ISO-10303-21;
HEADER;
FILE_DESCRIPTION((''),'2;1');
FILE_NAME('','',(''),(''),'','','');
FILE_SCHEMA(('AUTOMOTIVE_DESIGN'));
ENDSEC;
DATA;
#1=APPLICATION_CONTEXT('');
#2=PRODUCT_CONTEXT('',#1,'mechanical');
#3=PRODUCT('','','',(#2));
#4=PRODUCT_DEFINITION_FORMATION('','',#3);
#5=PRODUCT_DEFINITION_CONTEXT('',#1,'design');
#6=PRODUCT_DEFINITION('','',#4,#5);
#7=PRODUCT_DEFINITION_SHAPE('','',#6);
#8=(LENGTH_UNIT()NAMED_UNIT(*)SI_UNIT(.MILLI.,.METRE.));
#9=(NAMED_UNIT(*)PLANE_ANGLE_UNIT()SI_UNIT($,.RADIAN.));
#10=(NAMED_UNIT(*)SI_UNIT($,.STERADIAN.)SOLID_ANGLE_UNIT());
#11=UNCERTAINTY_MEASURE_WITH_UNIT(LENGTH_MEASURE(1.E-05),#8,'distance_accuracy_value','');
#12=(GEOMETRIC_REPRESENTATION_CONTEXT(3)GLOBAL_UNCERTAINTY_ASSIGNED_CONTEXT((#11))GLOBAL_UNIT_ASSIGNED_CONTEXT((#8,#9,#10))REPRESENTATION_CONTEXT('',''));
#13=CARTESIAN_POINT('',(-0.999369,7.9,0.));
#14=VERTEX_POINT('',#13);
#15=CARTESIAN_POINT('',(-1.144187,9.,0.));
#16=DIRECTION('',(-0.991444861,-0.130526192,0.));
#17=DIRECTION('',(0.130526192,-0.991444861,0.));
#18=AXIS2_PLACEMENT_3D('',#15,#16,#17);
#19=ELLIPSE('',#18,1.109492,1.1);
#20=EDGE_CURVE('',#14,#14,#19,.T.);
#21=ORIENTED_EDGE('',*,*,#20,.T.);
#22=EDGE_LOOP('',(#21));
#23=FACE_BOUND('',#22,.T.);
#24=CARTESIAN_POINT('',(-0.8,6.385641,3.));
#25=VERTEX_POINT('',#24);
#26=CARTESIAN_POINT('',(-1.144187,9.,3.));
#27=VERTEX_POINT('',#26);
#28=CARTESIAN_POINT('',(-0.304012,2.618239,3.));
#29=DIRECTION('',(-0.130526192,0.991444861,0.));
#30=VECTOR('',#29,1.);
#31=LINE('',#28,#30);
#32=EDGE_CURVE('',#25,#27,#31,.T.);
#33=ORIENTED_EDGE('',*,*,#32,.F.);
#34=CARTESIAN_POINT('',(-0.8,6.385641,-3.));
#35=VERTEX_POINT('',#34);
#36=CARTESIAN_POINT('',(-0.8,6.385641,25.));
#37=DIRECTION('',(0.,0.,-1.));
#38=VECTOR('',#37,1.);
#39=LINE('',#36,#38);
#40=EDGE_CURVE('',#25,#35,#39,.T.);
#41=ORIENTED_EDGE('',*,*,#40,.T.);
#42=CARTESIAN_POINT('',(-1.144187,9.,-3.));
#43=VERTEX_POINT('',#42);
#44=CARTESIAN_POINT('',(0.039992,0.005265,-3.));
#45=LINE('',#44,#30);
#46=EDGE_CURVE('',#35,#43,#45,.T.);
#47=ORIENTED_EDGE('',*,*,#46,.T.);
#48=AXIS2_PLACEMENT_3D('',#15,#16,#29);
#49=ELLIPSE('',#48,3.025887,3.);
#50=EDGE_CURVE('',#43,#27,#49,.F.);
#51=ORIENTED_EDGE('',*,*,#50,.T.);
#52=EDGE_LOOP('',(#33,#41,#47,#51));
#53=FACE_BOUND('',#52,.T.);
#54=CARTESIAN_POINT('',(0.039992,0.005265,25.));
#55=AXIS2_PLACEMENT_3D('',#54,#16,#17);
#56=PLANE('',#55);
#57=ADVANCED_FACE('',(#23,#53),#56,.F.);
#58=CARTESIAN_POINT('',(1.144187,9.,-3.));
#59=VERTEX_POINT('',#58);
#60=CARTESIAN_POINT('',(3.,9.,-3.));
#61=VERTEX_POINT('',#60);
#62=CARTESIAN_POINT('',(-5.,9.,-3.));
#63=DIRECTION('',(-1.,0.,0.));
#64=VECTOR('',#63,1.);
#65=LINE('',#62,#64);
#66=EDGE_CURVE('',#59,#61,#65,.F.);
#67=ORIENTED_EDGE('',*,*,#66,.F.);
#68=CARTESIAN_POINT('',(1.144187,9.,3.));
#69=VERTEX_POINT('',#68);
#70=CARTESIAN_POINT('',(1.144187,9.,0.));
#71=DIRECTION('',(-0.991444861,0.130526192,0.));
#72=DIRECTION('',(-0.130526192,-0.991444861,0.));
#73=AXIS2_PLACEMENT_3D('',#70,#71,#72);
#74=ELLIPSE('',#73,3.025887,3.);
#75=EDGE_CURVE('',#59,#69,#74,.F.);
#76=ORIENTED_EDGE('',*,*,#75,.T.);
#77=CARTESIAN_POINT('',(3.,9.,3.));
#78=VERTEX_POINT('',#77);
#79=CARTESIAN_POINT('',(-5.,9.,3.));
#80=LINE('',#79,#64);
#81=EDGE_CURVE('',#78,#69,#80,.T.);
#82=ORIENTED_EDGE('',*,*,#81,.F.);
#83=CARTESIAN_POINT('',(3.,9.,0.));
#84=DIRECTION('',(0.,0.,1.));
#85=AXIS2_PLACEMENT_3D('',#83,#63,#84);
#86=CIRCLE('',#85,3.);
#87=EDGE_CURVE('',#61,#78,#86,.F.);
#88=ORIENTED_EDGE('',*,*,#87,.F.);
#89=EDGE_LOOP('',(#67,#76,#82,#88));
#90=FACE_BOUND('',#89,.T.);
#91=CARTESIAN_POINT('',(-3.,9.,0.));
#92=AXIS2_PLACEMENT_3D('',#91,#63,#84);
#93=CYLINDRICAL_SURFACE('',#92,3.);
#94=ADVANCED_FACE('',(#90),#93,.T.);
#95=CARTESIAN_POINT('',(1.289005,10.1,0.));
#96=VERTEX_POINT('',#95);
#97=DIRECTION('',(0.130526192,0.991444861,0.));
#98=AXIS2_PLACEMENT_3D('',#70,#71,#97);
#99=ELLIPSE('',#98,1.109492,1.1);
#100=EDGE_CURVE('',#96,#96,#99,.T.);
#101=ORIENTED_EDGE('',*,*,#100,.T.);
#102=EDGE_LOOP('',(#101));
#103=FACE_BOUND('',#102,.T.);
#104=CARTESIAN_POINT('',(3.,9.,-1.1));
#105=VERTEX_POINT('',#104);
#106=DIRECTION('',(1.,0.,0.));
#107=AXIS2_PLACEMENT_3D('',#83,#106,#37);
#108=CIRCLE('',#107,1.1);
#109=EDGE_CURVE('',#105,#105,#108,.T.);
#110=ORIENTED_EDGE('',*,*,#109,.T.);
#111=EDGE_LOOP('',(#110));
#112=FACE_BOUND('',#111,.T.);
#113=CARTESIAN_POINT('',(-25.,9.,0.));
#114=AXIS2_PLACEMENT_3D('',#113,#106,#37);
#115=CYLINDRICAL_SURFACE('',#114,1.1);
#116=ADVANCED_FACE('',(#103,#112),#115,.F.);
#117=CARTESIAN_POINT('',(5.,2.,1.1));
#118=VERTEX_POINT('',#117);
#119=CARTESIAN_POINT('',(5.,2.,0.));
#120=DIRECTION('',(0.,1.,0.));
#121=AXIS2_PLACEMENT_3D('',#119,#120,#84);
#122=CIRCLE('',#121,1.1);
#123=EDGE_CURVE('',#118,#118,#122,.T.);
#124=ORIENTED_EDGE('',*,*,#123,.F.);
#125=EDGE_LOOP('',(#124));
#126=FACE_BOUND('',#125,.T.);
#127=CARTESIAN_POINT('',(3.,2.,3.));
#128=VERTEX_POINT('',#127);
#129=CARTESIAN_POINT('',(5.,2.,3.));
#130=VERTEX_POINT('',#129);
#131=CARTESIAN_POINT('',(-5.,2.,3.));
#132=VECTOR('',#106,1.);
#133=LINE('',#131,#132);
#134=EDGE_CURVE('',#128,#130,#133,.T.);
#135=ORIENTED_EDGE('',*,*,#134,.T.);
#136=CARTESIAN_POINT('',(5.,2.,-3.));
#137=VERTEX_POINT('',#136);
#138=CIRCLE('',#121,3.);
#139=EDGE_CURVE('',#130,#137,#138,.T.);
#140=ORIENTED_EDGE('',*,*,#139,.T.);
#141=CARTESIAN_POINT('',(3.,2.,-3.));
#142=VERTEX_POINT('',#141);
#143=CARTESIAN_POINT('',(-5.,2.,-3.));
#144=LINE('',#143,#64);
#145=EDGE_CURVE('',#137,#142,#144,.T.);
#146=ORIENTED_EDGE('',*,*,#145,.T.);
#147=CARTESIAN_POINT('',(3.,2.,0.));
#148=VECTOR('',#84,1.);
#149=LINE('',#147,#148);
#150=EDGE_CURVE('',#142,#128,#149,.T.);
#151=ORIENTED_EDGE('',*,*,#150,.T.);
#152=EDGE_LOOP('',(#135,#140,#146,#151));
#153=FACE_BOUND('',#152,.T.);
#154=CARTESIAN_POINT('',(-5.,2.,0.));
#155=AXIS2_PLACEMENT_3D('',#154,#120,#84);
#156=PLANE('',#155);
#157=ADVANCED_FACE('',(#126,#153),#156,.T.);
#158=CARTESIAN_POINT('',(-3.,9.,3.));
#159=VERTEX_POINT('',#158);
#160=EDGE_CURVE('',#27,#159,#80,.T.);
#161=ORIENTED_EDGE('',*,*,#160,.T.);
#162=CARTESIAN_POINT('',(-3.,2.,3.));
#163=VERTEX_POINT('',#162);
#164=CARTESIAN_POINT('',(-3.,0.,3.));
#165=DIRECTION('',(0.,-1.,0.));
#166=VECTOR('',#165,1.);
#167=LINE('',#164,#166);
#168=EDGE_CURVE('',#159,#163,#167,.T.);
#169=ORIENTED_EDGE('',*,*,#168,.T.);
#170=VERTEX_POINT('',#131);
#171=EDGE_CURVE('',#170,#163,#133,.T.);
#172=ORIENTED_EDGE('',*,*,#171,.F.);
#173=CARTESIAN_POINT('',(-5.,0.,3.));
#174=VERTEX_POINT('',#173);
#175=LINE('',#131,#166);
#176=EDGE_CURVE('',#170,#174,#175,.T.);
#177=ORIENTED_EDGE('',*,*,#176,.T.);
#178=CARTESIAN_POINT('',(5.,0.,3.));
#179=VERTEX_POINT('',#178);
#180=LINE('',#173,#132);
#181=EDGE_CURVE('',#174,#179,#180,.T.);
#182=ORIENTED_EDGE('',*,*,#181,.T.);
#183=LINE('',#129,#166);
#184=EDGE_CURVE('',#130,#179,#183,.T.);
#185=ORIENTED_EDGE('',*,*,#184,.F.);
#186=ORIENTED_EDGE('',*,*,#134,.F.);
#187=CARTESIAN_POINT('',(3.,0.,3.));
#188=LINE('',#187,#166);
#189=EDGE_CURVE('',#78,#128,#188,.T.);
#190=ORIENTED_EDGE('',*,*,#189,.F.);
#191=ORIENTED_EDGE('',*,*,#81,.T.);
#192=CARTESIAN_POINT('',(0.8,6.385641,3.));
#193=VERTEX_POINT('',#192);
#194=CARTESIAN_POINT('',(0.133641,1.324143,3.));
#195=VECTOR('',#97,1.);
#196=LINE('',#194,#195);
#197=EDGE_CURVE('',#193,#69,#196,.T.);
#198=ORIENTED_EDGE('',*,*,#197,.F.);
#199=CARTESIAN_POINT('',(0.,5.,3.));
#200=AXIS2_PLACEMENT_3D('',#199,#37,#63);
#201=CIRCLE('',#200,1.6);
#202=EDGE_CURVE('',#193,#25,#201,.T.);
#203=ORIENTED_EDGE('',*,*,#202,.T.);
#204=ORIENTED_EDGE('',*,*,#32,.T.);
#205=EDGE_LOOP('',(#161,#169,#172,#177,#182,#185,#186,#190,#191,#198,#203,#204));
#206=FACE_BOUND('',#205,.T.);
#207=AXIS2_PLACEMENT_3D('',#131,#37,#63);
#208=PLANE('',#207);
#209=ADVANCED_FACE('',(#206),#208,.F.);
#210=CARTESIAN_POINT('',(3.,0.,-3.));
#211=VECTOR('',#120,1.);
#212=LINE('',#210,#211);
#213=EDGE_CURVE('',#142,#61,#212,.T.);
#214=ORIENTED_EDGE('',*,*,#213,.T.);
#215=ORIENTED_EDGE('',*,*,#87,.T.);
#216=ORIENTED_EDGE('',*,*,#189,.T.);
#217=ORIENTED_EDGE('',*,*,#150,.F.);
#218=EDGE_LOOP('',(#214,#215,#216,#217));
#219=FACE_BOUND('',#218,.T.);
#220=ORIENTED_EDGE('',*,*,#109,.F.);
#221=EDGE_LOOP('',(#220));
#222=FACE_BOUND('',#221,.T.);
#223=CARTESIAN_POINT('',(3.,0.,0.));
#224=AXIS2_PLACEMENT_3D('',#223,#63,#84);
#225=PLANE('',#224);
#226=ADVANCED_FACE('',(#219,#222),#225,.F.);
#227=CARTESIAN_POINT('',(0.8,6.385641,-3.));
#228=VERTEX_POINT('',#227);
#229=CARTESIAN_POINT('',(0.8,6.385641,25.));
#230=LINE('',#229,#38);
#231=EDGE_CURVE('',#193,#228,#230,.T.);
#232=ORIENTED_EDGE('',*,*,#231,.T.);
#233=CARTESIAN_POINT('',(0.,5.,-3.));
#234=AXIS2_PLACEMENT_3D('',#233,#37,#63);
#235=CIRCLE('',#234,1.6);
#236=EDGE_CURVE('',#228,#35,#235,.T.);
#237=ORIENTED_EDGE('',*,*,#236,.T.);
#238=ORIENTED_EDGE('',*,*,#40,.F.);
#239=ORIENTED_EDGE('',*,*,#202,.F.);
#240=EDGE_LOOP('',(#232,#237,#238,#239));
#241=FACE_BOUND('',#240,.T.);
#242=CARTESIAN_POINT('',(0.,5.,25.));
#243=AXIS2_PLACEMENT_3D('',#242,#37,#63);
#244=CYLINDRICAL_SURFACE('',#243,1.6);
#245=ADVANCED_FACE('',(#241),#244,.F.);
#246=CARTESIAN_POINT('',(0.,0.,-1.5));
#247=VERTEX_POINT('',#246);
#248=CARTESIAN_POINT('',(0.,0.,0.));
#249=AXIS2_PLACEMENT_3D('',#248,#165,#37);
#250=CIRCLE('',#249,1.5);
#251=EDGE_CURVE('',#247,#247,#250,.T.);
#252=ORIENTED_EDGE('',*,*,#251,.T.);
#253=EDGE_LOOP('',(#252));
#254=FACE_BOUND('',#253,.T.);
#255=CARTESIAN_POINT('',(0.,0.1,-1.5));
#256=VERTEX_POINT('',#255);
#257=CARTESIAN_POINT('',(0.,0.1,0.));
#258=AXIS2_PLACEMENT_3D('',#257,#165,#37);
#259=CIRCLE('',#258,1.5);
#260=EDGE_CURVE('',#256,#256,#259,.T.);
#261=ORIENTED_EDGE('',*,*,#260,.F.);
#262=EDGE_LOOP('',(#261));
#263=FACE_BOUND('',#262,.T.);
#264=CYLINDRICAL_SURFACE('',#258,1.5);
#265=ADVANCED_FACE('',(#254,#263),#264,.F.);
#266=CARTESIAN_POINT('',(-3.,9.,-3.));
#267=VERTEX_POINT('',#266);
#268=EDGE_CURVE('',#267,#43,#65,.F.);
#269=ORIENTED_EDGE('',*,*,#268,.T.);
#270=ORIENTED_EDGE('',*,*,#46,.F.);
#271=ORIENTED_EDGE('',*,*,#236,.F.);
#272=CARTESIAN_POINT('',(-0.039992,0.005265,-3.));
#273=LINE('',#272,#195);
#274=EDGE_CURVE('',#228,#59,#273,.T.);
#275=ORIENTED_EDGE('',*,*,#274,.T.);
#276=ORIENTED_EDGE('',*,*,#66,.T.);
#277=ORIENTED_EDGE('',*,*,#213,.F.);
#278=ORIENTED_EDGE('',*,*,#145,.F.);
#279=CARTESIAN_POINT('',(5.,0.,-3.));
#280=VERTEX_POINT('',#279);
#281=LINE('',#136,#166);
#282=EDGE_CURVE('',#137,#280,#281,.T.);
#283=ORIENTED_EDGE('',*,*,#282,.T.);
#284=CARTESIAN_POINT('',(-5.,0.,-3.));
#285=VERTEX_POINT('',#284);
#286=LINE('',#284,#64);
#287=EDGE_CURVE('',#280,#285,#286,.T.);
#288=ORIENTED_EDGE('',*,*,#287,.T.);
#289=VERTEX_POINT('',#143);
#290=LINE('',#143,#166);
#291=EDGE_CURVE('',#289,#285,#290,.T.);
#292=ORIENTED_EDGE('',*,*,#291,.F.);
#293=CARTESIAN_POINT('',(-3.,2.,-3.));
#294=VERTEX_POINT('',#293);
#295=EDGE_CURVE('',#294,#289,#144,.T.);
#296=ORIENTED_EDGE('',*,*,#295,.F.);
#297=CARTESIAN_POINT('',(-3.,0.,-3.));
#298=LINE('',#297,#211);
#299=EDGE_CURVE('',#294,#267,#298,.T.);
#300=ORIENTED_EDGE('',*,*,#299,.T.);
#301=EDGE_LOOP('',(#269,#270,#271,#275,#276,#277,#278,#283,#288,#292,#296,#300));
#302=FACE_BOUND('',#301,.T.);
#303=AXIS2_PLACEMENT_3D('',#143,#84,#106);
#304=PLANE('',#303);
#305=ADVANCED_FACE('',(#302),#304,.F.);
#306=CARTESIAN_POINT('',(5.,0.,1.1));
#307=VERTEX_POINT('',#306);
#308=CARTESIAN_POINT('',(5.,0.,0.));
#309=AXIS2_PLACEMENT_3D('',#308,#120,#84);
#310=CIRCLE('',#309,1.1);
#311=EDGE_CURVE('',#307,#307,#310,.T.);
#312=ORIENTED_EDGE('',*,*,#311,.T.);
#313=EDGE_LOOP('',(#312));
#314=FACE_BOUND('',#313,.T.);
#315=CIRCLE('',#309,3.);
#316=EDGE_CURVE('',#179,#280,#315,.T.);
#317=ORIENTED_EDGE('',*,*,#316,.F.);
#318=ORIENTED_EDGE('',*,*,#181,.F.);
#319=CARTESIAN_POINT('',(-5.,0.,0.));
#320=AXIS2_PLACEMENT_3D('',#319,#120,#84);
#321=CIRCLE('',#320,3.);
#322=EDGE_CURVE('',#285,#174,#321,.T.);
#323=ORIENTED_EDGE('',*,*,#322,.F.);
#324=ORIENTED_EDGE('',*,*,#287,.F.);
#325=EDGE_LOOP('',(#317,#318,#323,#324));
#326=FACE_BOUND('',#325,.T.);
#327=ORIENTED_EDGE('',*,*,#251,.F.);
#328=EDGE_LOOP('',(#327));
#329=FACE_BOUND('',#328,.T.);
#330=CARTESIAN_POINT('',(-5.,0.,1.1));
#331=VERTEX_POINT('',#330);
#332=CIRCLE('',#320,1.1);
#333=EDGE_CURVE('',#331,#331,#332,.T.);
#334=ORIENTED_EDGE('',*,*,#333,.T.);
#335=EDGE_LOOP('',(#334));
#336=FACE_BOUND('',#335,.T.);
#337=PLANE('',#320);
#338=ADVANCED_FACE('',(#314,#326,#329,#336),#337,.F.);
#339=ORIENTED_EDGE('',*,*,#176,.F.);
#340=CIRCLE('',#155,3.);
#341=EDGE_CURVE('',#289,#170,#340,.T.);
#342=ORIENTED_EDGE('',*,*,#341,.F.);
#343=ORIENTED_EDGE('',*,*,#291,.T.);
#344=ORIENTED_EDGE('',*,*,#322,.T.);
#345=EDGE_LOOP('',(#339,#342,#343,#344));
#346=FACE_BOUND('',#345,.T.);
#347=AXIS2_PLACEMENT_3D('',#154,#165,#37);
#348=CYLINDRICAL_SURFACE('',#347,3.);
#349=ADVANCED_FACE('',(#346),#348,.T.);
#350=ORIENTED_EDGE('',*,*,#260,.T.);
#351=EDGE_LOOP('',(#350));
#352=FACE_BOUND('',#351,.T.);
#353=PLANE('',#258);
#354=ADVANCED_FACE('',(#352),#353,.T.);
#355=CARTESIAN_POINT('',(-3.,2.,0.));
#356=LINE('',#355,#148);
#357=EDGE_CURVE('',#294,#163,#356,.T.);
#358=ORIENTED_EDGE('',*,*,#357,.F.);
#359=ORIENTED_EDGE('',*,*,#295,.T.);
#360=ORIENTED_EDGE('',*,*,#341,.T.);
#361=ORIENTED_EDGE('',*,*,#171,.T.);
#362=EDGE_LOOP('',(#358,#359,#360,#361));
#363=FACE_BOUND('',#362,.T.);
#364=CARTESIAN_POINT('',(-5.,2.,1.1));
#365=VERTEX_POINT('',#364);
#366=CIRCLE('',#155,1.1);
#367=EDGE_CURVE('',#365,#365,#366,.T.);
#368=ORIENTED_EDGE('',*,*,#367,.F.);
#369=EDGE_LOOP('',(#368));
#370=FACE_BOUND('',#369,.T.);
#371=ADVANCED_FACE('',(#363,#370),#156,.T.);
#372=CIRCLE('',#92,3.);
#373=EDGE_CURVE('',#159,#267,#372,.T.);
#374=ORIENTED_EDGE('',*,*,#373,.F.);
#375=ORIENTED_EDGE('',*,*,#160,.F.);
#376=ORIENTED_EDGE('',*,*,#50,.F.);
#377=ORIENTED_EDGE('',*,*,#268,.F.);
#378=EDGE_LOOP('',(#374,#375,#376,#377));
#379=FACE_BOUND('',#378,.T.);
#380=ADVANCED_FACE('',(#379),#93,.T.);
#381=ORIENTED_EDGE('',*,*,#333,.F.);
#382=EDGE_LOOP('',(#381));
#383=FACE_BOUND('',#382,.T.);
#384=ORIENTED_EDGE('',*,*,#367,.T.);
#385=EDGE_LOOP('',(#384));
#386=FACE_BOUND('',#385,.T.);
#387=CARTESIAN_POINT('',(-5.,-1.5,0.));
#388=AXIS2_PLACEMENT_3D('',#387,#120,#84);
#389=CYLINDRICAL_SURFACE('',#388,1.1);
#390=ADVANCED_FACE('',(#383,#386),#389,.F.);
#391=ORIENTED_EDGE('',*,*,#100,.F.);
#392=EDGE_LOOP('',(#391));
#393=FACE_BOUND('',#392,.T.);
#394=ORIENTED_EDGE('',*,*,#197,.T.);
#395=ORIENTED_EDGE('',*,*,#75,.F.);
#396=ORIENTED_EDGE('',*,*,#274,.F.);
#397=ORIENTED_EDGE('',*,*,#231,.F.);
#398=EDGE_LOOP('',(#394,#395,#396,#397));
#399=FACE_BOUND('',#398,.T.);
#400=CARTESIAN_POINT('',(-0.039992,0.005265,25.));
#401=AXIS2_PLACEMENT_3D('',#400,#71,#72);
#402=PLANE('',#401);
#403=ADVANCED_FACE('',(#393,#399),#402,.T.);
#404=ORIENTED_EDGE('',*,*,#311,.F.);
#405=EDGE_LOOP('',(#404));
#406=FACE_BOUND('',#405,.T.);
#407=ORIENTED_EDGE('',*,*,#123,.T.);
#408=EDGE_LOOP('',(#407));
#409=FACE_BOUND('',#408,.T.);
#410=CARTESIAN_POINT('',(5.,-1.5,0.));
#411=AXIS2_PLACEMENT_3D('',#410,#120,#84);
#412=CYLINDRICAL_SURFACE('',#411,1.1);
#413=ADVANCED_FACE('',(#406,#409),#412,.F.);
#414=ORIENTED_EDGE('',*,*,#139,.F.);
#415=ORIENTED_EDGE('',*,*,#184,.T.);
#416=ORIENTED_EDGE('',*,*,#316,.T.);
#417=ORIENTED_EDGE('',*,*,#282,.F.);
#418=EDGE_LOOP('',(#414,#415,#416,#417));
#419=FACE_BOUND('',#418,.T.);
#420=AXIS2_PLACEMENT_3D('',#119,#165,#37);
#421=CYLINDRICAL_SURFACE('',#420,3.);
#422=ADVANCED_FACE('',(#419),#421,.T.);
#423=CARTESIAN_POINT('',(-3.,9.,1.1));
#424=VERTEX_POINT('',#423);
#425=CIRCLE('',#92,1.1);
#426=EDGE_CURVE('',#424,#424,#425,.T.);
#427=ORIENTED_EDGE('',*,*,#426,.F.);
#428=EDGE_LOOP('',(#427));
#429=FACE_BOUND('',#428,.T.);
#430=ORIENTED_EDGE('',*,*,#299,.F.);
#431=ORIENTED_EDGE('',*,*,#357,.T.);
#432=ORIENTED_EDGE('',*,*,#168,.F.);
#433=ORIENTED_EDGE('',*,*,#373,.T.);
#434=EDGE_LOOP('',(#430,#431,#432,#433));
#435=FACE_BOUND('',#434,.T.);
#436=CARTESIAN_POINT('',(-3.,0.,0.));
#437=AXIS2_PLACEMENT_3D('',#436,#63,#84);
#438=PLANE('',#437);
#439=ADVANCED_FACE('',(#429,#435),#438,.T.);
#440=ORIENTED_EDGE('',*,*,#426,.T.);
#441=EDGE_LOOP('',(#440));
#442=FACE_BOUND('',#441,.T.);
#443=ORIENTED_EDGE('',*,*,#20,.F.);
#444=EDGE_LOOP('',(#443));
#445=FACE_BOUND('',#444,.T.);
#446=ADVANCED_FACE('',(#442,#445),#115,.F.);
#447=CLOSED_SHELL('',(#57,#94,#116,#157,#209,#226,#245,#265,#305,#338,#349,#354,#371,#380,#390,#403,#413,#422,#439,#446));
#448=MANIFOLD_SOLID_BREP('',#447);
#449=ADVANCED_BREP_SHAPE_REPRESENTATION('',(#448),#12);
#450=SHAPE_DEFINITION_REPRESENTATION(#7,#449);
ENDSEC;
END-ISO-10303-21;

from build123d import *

# Parameters (mm, degrees)
EXTRUDE_1_DEPTH     = 2
SKETCH_2_W          = 6
SKETCH_2_H          = 12
EXTRUDE_2_DEPTH     = 3
FILLET_1_RADIUS     = 3
FILLET_1_LENGTH     = 6
CUT_EXTRUDE_START   = -6
CUT_EXTRUDE_1_DEPTH = 6
SKETCH_4_R          = 1.1
CUT_EXTRUDE_2_DEPTH = 28
SKETCH_7_R          = 1.1
CUT_EXTRUDE_5_DEPTH = 3.5
SKETCH_9_R          = 1.5
CUT_EXTRUDE_7_DEPTH = 0.1


# Read off the part's stored shape, not the designer's step: 切除-拉伸1
with BuildPart() as part:
    # 草图1 → 凸台-拉伸1 (new body)
    with BuildSketch(Plane(origin=(0, 0, 0), x_dir=(1, 0, 0), z_dir=(0, 1, 0))):
        with BuildLine():
            Line((-5, 3), (5, 3))
            ThreePointArc((5, 3), (8, 0), (5, -3))
            Line((5, -3), (-5, -3))
            ThreePointArc((-5, -3), (-8, 0), (-5, 3))
        make_face()
    extrude(amount=EXTRUDE_1_DEPTH)

    # 草图2 → 凸台-拉伸2 (add, symmetric)
    with BuildSketch(Plane(origin=(0, 0, 0), x_dir=(0, 0, -1), z_dir=(1, 0, 0))):
        with Locations((0, 6)):
            Rectangle(SKETCH_2_W, SKETCH_2_H)
    extrude(amount=EXTRUDE_2_DEPTH, both=True)

    # 圆角1: full round fillet: the end face becomes a half cylinder, R = half its width
    fillet_1_face = Plane((0, 12, 0), x_dir=(1, 0, 0), z_dir=(0, 1, 0))  # on the end face: x along it, z out of the body
    fillet_1_slab = fillet_1_face.offset(-FILLET_1_RADIUS / 2) * Box(FILLET_1_LENGTH, 2 * FILLET_1_RADIUS, FILLET_1_RADIUS, mode=Mode.PRIVATE)  # the body's end, R deep
    fillet_1_round = Plane((0, 9, 0), x_dir=(0, 1, 0), z_dir=(1, 0, 0)) * Cylinder(FILLET_1_RADIUS, FILLET_1_LENGTH, mode=Mode.PRIVATE)  # its axis R under the face
    add(fillet_1_slab - fillet_1_round, mode=Mode.SUBTRACT)

    # 切除-拉伸1 outline → 切除-拉伸1 (cut)
    with BuildSketch(Plane(origin=(0, 0, -3), x_dir=(-1, 0, 0), z_dir=(0, 0, -1)).offset(CUT_EXTRUDE_START)):
        with BuildLine():
            ThreePointArc((-0.8, 6.385640646), (0, 3.4), (0.8, 6.385640646))
            Line((0.8, 6.385640646), (1.7488232, 13.59266837))
            Line((1.7488232, 13.59266837), (-1.7488232, 13.59266837))
            Line((-1.7488232, 13.59266837), (-0.8, 6.385640646))
        make_face()
    extrude(amount=CUT_EXTRUDE_1_DEPTH, mode=Mode.SUBTRACT)

    # 草图4 → 切除-拉伸2 (cut)
    with BuildSketch(Plane(origin=(3, 0, 0), x_dir=(0, 0, -1), z_dir=(1, 0, 0))):
        with Locations(Location((0, 9, 0), (0, 0, 270))):
            Circle(SKETCH_4_R)
    extrude(amount=-CUT_EXTRUDE_2_DEPTH, mode=Mode.SUBTRACT)

    # 草图7 → 切除-拉伸5 (cut)
    with BuildSketch(Plane(origin=(0, 2, 0), x_dir=(1, 0, 0), z_dir=(0, 1, 0))):
        with Locations(Location((5, 0, 0), (0, 0, 270))):
            Circle(SKETCH_7_R)
        with Locations(Location((-5, 0, 0), (0, 0, 270))):
            Circle(SKETCH_7_R)
    extrude(amount=-CUT_EXTRUDE_5_DEPTH, mode=Mode.SUBTRACT)

    # 草图9 → 切除-拉伸7 (cut)
    with BuildSketch(Plane.XZ):
        with Locations(Location((0, 0, 0), (0, 0, 270))):
            Circle(SKETCH_9_R)
    extrude(amount=-CUT_EXTRUDE_7_DEPTH, mode=Mode.SUBTRACT)


solid = part.part
